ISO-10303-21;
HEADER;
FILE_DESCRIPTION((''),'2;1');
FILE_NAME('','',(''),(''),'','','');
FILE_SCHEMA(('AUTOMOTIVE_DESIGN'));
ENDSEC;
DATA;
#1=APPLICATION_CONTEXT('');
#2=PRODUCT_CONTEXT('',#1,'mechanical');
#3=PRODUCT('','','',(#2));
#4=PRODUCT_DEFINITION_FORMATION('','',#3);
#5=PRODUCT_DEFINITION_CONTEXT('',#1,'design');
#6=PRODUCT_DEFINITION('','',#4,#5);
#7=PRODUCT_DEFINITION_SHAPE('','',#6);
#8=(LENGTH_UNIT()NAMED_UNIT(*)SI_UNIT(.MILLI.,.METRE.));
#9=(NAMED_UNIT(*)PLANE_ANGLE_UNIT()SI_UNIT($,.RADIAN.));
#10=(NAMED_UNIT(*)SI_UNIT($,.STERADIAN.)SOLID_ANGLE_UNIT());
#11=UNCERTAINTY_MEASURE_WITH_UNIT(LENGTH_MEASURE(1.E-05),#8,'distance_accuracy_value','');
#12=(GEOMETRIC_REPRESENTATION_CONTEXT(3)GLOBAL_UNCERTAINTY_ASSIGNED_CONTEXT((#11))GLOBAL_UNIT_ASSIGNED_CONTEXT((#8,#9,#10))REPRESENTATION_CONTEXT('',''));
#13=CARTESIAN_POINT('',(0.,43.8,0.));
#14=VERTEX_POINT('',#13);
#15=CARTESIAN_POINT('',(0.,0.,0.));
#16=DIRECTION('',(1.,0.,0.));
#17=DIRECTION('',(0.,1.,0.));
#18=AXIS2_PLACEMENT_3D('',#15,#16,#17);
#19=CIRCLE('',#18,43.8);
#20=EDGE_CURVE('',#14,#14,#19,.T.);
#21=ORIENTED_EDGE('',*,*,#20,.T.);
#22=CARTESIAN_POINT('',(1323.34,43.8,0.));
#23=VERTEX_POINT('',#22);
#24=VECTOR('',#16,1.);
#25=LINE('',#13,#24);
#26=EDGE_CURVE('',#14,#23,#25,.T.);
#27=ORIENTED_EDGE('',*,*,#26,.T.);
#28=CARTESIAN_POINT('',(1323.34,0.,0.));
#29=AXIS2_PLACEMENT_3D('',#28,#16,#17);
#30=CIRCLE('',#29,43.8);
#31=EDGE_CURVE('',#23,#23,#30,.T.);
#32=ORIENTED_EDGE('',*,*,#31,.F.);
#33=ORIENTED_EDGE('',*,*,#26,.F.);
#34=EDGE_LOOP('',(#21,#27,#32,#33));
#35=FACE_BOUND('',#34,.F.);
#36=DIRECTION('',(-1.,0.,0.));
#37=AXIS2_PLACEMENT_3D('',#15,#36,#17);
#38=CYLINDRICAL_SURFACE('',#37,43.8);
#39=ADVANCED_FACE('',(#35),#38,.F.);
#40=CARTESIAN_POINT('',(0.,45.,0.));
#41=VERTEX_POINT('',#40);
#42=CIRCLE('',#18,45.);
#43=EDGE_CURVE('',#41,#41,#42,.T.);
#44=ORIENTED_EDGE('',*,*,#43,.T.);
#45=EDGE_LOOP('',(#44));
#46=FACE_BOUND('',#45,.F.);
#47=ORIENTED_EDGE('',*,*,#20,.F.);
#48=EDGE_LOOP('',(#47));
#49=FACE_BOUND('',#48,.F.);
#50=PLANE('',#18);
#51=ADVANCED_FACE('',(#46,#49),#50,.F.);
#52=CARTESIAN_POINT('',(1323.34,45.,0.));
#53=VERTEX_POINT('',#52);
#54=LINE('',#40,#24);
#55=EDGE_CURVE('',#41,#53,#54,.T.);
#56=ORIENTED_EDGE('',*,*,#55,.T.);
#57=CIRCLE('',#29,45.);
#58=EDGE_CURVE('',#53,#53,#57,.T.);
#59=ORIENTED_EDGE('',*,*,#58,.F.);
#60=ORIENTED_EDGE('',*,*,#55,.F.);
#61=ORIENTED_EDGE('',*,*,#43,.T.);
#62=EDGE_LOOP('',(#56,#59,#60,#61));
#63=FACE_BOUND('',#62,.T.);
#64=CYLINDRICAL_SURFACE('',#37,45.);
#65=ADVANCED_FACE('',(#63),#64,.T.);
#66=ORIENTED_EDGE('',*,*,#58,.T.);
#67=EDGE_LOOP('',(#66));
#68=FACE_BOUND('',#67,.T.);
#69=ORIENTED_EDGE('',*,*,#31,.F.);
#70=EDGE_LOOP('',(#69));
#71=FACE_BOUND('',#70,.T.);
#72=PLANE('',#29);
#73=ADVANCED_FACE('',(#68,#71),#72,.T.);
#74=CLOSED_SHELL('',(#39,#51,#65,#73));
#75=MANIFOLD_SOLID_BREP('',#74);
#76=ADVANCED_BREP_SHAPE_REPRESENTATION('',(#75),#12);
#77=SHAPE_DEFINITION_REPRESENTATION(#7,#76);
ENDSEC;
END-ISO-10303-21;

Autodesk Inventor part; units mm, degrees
ref_plane "YZ Plane" through (0, 0, 0) normal (1, 0, 0) x (0, 1, 0)
ref_plane "XZ Plane" through (0, 0, 0) normal (0, 1, 0) x (-1, 0, 0)
ref_plane "XY Plane" through (0, 0, 0) normal (0, 0, 1) x (1, 0, 0)
sketch "Sketch1" plane through (0, 0, 0) normal (1, 0, 0) x (0, 1, 0)
  circle A0 centre (0, 0) radius 45
  circle A1 centre (0, 0) radius 43.8
  dimension "d0" = 90
  dimension "d1" = 1.2
extrude "Extrusion1" add sketch "Sketch1" along normal blind 1323.34
equation "\"d0\" = OD"
equation "\"d1\" = t"
equation "\"d2\" = L"
equation "\"OD\" = 90"
equation "\"t\" = 1.2"
equation "\"L\" = PL"
equation "\"ID\" = 87.6"
equation "\"PL\" = 1323.34"
properties part number "ISO 4065 Pipe DN90x1.2xS40 - 1323.34000000" material "PVC-Piping"
